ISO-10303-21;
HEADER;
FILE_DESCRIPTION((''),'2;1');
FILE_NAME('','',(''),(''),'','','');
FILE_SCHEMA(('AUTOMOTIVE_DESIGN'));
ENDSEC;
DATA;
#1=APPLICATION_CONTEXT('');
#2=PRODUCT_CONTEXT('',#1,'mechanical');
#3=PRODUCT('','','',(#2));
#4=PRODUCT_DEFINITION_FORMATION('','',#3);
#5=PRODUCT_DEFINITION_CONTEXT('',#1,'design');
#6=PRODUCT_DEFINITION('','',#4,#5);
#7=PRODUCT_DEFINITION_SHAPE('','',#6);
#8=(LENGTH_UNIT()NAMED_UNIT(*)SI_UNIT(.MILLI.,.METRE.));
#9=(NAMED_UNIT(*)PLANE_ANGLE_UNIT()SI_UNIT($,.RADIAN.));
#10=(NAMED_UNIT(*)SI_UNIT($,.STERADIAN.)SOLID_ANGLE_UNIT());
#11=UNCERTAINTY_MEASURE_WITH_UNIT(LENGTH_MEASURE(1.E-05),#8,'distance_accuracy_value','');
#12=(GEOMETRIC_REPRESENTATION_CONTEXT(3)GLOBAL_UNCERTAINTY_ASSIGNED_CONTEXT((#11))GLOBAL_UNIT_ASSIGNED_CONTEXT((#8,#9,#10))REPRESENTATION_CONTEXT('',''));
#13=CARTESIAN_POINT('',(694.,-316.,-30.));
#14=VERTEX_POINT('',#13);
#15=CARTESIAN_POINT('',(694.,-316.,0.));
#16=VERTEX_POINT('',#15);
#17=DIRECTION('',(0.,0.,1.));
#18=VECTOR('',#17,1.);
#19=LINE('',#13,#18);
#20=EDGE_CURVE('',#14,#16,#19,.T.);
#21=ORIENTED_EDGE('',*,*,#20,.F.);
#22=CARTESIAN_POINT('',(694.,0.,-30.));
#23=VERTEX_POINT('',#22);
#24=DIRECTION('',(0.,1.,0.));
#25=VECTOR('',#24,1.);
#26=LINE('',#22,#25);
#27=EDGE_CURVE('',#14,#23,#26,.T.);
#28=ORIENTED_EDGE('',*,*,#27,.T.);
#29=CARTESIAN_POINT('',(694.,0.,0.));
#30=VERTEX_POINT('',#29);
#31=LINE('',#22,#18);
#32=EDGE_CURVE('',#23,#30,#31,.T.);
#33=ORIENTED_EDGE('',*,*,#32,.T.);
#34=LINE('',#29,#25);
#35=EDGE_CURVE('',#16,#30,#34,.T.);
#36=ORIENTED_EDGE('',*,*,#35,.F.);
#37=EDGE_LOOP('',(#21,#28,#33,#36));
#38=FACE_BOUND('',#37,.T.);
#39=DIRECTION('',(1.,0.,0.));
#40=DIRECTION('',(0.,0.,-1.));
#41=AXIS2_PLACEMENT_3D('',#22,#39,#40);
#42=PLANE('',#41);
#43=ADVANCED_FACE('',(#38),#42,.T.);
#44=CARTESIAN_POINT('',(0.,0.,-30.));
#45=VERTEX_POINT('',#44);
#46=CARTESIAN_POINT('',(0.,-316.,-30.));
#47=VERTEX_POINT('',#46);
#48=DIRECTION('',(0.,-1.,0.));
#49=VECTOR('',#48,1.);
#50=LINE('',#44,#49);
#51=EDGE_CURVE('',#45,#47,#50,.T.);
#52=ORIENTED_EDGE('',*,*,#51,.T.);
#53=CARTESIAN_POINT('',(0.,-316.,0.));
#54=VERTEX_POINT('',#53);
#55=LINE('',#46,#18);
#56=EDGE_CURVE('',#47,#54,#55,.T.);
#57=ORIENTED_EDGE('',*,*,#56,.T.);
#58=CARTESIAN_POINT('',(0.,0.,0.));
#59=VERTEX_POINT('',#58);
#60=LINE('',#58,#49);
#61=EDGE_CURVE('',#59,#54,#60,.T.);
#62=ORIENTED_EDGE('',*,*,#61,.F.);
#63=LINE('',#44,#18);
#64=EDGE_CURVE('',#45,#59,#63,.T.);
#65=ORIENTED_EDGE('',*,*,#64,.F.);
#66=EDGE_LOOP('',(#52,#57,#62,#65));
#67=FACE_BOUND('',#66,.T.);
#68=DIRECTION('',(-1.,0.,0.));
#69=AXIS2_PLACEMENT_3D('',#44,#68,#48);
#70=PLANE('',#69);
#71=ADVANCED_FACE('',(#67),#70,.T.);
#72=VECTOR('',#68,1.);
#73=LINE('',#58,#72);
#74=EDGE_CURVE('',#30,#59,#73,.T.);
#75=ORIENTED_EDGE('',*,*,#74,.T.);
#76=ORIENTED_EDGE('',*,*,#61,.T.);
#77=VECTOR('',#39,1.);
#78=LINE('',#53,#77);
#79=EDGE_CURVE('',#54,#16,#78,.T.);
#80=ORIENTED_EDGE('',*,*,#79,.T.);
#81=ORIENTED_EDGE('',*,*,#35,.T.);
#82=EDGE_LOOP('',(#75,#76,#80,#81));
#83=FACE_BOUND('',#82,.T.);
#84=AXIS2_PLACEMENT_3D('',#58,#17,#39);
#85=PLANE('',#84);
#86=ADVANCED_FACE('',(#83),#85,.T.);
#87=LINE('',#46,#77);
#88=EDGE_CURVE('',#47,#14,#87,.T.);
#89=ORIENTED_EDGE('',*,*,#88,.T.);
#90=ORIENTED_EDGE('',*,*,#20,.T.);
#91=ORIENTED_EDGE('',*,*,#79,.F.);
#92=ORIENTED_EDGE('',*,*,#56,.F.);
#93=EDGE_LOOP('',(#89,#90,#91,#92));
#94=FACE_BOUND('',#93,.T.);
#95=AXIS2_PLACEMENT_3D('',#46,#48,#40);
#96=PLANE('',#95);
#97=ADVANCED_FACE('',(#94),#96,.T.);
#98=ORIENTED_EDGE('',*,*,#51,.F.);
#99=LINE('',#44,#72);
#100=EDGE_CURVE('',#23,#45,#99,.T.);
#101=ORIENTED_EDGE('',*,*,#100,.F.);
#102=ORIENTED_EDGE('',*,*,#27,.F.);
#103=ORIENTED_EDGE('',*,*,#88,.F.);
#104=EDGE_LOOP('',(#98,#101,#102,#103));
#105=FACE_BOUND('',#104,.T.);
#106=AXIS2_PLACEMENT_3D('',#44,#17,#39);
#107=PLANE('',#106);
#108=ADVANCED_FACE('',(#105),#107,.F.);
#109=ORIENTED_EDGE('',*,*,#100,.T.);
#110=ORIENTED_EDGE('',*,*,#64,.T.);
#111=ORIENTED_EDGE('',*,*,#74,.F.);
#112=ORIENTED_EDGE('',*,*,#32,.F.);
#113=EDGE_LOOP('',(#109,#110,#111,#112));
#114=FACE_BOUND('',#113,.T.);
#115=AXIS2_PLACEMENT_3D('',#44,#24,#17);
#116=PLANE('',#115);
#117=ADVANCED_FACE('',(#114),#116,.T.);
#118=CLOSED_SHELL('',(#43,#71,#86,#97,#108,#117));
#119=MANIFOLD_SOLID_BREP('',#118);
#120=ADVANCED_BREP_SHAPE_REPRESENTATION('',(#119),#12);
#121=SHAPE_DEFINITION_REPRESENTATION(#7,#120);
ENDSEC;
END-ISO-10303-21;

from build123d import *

# Parameters (mm, degrees)
IZIM1_W            = 694
IZIM1_H            = 316
TABAN_FLAN_1_DEPTH = 30


# Sheet-metal steps are written as plain solids
with BuildPart() as part:
    # Çizim1 → Taban-Flanş1 (new body)
    with BuildSketch(Plane.XY):
        with Locations((347, -158)):
            Rectangle(IZIM1_W, IZIM1_H)
    extrude(amount=-TABAN_FLAN_1_DEPTH)


solid = part.part
